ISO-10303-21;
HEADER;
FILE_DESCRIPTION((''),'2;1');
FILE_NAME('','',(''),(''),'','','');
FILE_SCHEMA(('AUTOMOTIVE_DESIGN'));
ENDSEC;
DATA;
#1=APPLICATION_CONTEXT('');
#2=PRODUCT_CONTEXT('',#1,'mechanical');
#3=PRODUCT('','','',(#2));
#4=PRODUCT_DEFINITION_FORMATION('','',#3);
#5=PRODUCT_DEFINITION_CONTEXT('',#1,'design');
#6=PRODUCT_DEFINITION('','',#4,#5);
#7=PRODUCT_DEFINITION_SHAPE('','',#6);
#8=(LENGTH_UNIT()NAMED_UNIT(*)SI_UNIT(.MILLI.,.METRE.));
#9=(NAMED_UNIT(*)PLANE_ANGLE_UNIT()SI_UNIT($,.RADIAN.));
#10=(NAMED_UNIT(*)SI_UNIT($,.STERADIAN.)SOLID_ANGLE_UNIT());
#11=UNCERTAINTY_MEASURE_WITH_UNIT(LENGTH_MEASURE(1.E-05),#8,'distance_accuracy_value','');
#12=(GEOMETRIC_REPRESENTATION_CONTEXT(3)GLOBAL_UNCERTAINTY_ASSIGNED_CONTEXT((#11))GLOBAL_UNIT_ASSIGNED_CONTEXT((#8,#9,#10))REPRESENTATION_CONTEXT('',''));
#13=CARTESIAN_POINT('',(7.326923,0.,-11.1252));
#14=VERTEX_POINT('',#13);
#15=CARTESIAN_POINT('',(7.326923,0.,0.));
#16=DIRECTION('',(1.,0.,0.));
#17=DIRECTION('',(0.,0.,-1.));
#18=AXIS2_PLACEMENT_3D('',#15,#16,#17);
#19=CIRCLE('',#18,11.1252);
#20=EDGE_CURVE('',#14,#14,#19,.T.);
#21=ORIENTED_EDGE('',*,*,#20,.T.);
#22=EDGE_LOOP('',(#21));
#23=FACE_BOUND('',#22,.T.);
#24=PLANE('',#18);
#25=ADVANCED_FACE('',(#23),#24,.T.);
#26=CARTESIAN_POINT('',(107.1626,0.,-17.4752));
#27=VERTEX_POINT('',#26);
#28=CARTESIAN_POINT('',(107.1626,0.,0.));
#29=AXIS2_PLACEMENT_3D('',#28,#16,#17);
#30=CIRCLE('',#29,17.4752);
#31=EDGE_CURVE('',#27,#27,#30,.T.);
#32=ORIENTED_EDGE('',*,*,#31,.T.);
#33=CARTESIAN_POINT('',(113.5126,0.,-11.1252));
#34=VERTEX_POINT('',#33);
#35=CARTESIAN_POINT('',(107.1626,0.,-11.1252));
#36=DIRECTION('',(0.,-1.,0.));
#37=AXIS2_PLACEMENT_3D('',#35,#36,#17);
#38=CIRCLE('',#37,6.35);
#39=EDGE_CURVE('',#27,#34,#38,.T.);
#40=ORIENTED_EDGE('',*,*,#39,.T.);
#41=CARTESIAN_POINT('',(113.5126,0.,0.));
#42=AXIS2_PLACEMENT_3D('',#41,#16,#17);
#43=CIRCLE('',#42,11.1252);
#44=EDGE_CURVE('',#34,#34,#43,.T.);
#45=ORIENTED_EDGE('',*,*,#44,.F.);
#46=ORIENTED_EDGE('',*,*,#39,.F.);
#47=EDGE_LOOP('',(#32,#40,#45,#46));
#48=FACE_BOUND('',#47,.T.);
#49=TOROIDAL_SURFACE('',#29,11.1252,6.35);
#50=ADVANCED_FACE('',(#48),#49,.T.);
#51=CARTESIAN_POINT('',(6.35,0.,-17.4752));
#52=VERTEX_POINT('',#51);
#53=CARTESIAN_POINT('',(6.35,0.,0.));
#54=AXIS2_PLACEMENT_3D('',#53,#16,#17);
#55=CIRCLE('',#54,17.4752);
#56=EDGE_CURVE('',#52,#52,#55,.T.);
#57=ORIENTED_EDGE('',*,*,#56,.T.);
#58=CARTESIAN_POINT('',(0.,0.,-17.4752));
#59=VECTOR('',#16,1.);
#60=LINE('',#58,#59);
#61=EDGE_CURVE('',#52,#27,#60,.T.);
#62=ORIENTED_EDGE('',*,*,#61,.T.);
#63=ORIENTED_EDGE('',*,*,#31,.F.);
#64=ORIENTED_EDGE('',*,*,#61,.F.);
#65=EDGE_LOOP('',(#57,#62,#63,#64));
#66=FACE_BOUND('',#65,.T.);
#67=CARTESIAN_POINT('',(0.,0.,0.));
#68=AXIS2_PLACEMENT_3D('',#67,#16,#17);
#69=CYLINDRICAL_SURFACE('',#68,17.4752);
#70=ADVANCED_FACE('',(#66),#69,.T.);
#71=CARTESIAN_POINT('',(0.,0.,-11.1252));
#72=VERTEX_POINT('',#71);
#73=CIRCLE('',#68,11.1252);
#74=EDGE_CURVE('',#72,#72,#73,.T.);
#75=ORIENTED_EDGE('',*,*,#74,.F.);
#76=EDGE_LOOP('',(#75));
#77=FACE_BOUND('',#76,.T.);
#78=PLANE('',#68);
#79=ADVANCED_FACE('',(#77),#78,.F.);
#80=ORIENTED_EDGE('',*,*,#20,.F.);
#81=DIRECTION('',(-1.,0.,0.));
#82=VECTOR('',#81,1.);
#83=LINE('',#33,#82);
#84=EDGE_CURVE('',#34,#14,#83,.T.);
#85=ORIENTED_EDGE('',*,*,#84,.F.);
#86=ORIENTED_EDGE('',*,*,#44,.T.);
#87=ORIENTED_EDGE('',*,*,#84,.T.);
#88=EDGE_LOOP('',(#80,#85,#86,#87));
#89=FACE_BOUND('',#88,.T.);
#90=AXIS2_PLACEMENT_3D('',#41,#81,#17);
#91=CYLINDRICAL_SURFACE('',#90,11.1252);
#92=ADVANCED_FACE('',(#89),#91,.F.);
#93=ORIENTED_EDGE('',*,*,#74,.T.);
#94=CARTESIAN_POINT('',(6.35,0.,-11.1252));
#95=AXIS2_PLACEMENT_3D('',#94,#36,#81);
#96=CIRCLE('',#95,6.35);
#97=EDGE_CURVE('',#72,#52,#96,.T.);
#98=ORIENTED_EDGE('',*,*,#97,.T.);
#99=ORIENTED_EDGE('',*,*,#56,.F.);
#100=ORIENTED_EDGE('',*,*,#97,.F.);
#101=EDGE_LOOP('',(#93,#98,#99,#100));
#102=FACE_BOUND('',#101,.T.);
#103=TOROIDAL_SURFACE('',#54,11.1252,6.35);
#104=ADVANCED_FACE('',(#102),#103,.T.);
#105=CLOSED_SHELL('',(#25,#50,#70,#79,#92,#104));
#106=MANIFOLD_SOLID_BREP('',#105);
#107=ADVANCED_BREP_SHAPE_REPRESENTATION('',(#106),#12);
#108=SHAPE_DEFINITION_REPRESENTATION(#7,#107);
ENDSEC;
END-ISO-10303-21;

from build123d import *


# Not quite as in the source:
# - a fillet or chamfer that OpenCascade refuses, or shapes differently, is made with other operations: its cross-section is extruded or revolved along the edge and cut away or added


with BuildPart() as f1:
    # F0 (on Front) → F1 (revolve)
    with BuildSketch(Plane.XZ):
        Polygon((7.3269232676, 0), (0, 0), (0, -17.4752), (113.5126, -17.4752), (113.5126, -11.1252), (7.3269232676, -11.1252), align=None)
    revolve(axis=Axis((18.5955958441, 0, 0), (1, 0, 0)))

    # F2: fillet of radius 6.35 on 2 edges, made by hand

    # F2_s1 → F2_t2 (revolve, cut)
    with BuildSketch(Plane.XZ):
        with BuildLine():
            ThreePointArc((0, -11.1252), (1.8598719395, -15.6153280605), (6.35, -17.4752))
            Line((6.35, -17.4752), (0, -17.4752))
            Line((0, -17.4752), (0, -11.1252))
        make_face()
    revolve(axis=Axis((0, 0, 0), (1, 0, 0)), mode=Mode.SUBTRACT)

    # F2_s3 → F2_t4 (revolve, cut)
    with BuildSketch(Plane.XZ):
        with BuildLine():
            ThreePointArc((107.1626, -17.4752), (111.6527280605, -15.6153280605), (113.5126, -11.1252))
            Line((113.5126, -11.1252), (113.5126, -17.4752))
            Line((113.5126, -17.4752), (107.1626, -17.4752))
        make_face()
    revolve(axis=Axis((113.5126, 0, 0), (1, 0, 0)), mode=Mode.SUBTRACT)


solid = f1.part
